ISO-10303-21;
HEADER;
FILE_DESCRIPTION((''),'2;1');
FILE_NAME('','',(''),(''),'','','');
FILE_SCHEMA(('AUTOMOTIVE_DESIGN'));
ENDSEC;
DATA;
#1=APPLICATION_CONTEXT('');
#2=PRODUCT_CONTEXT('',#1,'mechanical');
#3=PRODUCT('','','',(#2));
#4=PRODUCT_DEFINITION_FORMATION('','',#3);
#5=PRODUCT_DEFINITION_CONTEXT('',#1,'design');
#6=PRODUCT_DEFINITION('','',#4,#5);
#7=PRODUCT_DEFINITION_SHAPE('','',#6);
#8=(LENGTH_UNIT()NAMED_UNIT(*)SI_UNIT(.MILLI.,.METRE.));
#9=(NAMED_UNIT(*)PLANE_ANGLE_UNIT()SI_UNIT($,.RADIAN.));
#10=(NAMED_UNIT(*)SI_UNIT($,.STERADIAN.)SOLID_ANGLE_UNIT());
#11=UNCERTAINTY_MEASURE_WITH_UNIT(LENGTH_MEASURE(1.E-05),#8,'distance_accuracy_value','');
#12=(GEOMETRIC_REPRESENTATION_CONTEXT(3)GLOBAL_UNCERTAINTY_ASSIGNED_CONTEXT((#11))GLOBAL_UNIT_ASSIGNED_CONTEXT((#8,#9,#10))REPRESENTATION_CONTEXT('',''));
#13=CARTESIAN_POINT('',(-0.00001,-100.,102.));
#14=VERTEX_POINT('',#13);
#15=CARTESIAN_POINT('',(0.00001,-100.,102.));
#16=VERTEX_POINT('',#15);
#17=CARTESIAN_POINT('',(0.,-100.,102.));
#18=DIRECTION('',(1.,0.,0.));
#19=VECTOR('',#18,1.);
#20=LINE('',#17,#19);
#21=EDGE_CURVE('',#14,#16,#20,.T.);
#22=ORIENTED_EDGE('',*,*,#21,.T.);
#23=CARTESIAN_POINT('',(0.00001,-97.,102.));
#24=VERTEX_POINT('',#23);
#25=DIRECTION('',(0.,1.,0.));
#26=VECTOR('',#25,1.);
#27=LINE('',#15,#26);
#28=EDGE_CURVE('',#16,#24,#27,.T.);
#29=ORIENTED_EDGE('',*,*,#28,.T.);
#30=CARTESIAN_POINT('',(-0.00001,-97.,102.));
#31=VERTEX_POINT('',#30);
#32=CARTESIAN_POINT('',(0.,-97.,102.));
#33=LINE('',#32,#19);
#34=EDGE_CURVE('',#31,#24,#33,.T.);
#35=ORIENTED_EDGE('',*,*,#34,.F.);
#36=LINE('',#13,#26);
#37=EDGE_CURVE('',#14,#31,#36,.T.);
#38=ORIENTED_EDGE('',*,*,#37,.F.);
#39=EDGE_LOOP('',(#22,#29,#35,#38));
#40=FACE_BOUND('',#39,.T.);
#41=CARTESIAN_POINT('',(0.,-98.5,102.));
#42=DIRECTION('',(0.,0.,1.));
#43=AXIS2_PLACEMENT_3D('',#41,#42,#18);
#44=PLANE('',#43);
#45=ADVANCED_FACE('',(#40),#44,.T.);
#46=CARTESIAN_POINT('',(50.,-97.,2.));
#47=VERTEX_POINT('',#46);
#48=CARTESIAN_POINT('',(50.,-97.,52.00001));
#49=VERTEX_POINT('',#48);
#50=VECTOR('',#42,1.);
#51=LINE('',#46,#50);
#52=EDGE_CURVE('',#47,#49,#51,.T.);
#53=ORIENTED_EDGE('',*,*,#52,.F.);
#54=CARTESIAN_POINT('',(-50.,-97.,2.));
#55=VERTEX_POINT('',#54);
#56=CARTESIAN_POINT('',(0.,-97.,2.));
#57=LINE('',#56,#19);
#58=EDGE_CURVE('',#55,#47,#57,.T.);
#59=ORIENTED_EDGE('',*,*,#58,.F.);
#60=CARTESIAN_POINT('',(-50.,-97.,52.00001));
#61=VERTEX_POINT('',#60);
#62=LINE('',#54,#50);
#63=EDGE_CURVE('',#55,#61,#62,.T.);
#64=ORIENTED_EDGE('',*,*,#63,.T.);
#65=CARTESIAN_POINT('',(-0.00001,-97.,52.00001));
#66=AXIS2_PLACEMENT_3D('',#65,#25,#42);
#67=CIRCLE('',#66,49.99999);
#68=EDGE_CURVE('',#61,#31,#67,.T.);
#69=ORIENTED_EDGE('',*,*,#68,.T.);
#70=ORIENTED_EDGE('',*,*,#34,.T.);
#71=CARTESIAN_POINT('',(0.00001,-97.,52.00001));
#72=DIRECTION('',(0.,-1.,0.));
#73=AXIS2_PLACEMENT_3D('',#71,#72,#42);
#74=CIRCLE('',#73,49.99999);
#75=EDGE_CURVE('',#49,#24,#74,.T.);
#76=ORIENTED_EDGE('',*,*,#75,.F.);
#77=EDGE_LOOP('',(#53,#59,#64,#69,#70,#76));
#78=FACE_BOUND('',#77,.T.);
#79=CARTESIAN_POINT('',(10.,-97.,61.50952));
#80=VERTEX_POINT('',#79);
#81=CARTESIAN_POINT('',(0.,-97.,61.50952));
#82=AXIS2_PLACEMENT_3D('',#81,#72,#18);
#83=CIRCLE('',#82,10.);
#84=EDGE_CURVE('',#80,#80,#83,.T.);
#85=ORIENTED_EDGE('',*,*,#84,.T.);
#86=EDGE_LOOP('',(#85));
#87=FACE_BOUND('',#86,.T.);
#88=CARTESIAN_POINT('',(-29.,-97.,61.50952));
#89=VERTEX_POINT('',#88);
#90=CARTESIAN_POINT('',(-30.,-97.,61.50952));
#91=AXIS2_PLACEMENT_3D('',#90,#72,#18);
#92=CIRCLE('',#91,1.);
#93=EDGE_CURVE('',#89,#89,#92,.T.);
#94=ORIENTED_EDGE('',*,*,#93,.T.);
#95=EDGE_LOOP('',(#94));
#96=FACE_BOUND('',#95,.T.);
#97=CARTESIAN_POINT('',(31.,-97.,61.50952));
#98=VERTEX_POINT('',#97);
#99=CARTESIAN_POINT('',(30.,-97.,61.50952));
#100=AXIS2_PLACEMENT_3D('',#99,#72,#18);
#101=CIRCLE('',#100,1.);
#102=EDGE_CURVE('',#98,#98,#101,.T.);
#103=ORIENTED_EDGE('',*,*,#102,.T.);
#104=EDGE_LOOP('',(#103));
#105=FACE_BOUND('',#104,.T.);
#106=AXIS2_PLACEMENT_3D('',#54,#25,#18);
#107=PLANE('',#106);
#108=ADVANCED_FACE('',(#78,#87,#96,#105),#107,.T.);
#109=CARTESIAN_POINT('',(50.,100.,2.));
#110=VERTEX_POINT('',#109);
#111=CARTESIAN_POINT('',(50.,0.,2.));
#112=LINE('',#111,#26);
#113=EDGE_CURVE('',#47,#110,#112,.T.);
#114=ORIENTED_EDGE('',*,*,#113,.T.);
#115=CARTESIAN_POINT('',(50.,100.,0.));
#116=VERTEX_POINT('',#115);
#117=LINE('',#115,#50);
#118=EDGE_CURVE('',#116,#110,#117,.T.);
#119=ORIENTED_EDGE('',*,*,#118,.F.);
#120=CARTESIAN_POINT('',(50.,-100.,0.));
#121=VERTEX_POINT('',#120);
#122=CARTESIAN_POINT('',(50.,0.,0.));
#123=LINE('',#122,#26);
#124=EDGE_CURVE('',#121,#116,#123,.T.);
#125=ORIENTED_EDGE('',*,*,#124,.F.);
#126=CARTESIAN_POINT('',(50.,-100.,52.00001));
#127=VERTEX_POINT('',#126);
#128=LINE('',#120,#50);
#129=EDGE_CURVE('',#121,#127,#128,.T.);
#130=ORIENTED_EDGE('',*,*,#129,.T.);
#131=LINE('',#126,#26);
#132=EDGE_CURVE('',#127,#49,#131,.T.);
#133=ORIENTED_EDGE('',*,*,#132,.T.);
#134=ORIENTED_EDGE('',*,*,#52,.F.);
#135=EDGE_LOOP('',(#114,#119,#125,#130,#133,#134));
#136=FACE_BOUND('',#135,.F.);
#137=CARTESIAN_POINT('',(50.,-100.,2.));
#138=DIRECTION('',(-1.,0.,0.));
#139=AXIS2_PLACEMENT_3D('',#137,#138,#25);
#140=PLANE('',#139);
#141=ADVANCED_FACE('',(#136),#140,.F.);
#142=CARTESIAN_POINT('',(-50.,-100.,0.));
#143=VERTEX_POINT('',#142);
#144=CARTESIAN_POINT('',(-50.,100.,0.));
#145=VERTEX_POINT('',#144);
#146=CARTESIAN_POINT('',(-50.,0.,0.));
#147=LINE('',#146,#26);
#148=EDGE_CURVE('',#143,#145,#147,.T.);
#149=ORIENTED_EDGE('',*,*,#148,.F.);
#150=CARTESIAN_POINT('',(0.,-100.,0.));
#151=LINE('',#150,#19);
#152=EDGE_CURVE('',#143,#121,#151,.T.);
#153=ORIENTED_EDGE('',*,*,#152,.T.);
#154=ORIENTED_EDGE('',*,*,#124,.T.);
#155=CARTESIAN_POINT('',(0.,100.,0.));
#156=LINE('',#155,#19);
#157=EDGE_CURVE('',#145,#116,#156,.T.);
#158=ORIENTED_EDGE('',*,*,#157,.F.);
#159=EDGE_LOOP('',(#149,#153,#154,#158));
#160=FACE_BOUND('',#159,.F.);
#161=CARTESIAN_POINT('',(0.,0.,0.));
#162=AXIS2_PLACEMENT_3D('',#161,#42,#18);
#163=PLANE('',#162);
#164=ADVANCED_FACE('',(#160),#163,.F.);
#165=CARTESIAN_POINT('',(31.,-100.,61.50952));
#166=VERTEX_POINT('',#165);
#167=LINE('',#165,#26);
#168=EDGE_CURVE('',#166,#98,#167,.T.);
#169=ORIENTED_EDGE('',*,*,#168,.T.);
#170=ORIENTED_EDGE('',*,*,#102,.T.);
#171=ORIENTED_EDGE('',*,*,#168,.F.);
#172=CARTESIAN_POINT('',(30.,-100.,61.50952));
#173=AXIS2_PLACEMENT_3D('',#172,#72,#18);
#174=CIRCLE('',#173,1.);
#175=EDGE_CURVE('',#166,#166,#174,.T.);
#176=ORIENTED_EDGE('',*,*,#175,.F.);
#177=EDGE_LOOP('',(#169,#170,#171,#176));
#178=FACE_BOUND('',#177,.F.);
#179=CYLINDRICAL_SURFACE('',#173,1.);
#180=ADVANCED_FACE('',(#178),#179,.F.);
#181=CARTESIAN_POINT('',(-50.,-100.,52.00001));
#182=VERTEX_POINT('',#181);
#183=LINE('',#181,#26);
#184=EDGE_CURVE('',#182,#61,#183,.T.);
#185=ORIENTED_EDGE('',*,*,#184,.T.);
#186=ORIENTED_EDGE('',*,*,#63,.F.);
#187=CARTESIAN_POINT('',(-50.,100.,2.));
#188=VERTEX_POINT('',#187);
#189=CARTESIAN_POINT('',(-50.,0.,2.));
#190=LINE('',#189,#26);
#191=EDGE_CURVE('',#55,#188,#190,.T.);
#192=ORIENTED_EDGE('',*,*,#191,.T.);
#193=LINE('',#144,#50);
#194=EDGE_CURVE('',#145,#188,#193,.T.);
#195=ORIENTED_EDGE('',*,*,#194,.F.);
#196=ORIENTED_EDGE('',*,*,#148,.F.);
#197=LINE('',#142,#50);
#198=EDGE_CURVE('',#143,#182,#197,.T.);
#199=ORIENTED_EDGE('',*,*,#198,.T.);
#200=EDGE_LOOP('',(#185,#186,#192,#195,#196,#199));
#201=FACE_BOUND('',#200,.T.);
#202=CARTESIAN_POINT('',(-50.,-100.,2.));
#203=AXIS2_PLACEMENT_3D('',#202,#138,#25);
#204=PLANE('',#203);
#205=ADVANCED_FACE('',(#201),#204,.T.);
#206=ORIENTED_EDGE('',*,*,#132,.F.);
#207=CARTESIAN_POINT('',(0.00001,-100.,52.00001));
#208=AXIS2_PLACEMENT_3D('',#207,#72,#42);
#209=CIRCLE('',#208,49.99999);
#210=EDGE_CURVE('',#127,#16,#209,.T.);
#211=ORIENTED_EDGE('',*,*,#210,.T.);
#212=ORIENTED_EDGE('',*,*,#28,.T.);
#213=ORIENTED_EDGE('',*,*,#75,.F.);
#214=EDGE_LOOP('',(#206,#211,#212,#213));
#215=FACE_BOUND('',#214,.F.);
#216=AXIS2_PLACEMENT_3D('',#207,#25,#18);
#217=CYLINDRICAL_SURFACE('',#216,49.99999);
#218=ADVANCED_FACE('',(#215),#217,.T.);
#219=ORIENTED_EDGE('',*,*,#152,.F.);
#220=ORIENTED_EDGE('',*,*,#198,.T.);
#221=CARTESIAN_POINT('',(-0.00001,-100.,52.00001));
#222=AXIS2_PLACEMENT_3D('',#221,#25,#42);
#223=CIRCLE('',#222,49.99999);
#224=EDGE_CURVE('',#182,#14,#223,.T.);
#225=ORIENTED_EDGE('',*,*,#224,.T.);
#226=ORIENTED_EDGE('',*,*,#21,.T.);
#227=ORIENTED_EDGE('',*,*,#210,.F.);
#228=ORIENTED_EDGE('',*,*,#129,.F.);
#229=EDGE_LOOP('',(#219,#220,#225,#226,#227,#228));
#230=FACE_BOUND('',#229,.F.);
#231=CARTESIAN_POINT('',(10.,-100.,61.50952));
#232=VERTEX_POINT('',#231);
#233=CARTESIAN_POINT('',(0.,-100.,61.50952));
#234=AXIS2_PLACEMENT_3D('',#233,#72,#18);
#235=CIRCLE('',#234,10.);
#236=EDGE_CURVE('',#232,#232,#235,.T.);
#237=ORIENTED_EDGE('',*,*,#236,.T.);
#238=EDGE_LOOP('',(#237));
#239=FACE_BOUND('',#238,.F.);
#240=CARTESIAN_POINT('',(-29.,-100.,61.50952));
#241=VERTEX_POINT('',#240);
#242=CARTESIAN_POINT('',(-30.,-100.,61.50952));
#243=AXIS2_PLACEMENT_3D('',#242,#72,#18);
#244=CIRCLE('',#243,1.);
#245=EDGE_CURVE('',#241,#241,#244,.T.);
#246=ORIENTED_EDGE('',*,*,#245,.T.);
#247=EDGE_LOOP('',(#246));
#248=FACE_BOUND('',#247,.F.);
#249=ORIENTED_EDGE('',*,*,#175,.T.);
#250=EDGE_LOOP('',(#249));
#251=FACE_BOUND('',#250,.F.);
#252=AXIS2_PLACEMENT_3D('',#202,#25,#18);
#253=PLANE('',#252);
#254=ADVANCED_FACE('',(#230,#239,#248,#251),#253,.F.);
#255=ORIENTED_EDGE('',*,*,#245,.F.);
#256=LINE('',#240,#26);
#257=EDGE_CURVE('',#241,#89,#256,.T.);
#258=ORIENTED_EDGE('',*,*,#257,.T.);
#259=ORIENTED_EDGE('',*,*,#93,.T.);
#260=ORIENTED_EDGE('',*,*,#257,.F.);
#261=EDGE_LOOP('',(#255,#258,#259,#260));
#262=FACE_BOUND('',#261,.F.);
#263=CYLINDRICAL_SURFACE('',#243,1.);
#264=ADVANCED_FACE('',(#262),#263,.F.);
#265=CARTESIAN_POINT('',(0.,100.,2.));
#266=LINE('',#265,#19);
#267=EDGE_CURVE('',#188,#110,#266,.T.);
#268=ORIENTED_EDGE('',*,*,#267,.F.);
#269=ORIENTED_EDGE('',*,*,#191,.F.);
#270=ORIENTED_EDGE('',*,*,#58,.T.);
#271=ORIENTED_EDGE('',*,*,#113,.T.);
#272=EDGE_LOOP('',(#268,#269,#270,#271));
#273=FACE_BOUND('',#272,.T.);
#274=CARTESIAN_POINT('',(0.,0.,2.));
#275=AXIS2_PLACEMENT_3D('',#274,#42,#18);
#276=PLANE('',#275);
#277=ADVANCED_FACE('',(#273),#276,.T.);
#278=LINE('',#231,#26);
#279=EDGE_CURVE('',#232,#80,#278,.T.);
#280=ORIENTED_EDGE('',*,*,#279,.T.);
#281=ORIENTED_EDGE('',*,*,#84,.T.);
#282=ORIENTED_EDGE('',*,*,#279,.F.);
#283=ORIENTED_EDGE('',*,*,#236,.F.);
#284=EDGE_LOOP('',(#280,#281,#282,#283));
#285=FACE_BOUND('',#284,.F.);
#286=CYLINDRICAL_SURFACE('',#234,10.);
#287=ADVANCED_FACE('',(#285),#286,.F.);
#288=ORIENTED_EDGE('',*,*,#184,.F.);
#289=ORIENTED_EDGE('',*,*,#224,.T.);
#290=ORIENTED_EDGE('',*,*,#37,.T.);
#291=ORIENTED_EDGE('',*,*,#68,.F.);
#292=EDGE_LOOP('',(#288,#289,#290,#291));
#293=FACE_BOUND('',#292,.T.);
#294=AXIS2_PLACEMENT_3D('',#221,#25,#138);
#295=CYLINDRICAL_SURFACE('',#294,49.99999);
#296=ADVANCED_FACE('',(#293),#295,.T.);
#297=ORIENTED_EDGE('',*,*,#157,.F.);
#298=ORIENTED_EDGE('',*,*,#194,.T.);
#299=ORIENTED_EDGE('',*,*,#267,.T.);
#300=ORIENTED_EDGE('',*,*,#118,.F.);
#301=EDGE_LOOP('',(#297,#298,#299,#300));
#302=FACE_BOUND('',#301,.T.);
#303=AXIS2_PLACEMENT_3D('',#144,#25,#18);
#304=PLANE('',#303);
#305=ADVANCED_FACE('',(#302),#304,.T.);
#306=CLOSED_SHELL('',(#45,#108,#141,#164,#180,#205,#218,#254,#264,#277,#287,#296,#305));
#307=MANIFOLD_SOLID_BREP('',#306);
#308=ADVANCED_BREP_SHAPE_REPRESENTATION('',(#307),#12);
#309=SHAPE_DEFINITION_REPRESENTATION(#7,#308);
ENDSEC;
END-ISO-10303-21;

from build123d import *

# Parameters (mm, degrees)
F0_W     = 100
F0_H     = 200
F1_DEPTH = 2
F2_W     = 100
F2_H     = 3
F3_DEPTH = 100
F4_R     = 49.99999
F5_R     = 10
F6_DEPTH = 25
F5_R_2   = 1
F7_DEPTH = 25


# Not quite as in the source:
# - a fillet or chamfer is up to 0.001 mm smaller than in the source, because OpenCascade refuses the exact size


with BuildPart() as f1:
    # F0 (on Top) → F1 (new body)
    with BuildSketch(Plane.XY):
        Rectangle(F0_W, F0_H)
    extrude(amount=F1_DEPTH)

    # F2 (on face) → F3 (join)
    with BuildSketch(Plane.XY.offset(2)):
        with Locations((0, -98.5)):
            Rectangle(F2_W, F2_H)
    extrude(amount=F3_DEPTH)

    # F4 (radius 50 in the source; OpenCascade refuses exactly that, so slightly less here)
    f4_edges = [f1.edges().sort_by_distance(p)[0] for p in [
        (-50, -98.5, 102),
        (50, -98.5, 102),
    ]]
    fillet(f4_edges, radius=F4_R)

    # F5 (on face) → F6 (cut)
    with BuildSketch(Plane.XZ.offset(100)):
        with Locations((0, 61.5095198154)):
            Circle(F5_R)
    extrude(amount=-F6_DEPTH, mode=Mode.SUBTRACT)

    # F5 (on face) → F7 (cut)
    with BuildSketch(Plane.XZ.offset(100)):
        with Locations((0, 61.5095198154)):
            Circle(F5_R)
        with Locations((30, 61.5095198154)):
            Circle(F5_R_2)
        with Locations((-30, 61.5095198154)):
            Circle(F5_R_2)
    extrude(amount=-F7_DEPTH, mode=Mode.SUBTRACT)


solid = f1.part
